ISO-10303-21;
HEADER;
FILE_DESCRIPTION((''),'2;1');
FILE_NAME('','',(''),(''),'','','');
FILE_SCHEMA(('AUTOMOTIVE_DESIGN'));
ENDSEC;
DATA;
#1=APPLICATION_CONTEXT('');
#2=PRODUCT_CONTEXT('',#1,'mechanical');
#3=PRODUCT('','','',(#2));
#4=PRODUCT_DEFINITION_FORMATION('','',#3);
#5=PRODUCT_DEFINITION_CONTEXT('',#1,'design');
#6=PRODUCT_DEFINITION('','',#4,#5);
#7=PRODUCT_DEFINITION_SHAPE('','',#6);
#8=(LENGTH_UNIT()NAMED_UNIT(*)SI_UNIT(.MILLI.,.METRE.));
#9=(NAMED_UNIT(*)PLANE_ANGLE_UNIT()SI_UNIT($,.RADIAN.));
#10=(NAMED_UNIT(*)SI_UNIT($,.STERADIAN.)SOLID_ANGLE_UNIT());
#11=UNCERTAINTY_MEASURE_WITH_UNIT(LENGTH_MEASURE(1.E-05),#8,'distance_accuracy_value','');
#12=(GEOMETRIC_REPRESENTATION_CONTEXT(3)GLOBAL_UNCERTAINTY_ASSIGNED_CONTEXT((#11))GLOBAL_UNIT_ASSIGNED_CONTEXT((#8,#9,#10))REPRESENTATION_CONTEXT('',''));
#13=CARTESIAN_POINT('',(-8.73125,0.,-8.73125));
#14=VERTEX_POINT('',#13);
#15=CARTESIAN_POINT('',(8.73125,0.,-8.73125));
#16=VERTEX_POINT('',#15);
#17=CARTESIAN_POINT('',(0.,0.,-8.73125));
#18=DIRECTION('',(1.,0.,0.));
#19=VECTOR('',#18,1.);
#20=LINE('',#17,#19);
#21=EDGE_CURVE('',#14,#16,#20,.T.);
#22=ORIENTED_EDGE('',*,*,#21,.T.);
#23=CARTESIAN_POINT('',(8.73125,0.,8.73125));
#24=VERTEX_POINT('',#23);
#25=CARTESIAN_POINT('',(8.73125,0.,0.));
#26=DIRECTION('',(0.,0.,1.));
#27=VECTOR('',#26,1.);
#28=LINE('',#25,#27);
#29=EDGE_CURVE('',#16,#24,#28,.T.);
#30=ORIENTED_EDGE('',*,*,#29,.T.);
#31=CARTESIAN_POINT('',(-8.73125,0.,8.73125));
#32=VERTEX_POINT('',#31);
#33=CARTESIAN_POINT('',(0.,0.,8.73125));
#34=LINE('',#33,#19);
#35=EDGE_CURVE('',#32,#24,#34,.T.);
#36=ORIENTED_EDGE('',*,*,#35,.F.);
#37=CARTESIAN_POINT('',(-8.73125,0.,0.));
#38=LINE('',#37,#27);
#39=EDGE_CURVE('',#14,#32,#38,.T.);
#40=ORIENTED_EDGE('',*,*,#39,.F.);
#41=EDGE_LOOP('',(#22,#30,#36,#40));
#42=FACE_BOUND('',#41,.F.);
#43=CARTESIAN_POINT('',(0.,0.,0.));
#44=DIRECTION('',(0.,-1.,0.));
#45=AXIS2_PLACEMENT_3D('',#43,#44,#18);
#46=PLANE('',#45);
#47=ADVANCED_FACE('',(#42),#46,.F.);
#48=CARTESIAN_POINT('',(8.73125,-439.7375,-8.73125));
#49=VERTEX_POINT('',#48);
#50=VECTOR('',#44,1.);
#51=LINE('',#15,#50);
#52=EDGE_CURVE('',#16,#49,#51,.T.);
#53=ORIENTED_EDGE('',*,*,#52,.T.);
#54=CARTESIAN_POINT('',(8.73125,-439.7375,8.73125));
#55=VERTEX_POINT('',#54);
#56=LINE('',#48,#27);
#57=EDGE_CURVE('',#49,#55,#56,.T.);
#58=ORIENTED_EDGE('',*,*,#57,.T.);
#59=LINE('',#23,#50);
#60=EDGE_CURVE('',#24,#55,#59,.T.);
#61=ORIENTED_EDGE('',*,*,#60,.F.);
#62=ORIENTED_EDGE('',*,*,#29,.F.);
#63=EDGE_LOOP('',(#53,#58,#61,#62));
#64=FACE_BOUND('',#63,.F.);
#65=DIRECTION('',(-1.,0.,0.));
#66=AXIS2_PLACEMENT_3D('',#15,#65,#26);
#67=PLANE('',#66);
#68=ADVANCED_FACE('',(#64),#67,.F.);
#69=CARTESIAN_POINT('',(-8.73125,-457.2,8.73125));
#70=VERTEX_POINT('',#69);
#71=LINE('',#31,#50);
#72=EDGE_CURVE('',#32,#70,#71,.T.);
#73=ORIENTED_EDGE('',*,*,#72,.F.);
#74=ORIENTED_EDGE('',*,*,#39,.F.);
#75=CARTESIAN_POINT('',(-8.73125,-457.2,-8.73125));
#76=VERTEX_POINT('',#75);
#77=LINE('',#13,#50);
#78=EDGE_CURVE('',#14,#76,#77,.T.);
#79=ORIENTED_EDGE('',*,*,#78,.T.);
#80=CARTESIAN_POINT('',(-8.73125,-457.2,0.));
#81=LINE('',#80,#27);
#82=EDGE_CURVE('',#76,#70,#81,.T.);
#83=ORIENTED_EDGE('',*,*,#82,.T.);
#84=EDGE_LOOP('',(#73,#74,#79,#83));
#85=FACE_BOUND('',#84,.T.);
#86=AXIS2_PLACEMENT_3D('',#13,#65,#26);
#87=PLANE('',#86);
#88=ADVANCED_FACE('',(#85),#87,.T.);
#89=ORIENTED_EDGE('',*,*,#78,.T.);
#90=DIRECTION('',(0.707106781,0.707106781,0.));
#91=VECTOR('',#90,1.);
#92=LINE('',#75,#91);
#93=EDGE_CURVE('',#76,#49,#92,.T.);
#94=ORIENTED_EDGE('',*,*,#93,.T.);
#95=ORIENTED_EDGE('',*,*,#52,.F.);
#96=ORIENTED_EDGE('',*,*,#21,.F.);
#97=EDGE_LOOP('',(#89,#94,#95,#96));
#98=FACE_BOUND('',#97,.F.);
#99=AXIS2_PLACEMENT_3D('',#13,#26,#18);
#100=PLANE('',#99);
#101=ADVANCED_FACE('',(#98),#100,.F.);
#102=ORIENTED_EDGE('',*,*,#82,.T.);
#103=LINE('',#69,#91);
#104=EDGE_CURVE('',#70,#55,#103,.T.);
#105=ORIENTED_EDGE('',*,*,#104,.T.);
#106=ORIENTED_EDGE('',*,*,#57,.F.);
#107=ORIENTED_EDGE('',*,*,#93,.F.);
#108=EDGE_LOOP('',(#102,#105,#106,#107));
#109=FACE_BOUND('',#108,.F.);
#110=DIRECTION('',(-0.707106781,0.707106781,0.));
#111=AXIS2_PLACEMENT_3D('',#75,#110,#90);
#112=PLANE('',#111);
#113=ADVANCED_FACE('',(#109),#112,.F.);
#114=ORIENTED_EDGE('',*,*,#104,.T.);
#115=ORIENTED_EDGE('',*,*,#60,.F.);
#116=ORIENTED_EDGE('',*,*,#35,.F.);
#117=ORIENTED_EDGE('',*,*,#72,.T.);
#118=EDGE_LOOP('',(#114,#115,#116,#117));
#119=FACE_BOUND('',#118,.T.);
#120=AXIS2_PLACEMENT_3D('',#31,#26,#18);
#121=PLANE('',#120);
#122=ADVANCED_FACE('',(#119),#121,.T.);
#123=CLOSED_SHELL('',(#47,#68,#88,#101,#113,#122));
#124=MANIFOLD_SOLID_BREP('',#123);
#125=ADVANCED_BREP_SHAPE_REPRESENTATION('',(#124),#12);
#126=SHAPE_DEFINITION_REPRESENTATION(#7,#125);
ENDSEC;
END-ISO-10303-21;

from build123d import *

# Parameters (mm, degrees)
F0_W     = 17.4625
F0_H     = 17.4625
F1_DEPTH = 457.2
F3_DEPTH = 17.4625


# Not quite as in the source:
# - a length typed as a fraction of an inch, garbled in the dataset ("3 / 203.2 mm" for 3/8 in), is restored


with BuildPart() as f1:
    # F0 (on Front) → F1 (new body)
    with BuildSketch(Plane.XZ):
        Rectangle(F0_W, F0_H)
    extrude(amount=F1_DEPTH)

    # F2 (on face) → F3 (cut)
    with BuildSketch(Plane(origin=(0, 0, -8.73125), x_dir=(1, 0, 0), z_dir=(0, 0, -1))):
        Polygon((8.73125, 457.2), (-8.73125, 457.2), (8.73125, 439.7375), align=None)
    extrude(amount=-F3_DEPTH, mode=Mode.SUBTRACT)


solid = f1.part
